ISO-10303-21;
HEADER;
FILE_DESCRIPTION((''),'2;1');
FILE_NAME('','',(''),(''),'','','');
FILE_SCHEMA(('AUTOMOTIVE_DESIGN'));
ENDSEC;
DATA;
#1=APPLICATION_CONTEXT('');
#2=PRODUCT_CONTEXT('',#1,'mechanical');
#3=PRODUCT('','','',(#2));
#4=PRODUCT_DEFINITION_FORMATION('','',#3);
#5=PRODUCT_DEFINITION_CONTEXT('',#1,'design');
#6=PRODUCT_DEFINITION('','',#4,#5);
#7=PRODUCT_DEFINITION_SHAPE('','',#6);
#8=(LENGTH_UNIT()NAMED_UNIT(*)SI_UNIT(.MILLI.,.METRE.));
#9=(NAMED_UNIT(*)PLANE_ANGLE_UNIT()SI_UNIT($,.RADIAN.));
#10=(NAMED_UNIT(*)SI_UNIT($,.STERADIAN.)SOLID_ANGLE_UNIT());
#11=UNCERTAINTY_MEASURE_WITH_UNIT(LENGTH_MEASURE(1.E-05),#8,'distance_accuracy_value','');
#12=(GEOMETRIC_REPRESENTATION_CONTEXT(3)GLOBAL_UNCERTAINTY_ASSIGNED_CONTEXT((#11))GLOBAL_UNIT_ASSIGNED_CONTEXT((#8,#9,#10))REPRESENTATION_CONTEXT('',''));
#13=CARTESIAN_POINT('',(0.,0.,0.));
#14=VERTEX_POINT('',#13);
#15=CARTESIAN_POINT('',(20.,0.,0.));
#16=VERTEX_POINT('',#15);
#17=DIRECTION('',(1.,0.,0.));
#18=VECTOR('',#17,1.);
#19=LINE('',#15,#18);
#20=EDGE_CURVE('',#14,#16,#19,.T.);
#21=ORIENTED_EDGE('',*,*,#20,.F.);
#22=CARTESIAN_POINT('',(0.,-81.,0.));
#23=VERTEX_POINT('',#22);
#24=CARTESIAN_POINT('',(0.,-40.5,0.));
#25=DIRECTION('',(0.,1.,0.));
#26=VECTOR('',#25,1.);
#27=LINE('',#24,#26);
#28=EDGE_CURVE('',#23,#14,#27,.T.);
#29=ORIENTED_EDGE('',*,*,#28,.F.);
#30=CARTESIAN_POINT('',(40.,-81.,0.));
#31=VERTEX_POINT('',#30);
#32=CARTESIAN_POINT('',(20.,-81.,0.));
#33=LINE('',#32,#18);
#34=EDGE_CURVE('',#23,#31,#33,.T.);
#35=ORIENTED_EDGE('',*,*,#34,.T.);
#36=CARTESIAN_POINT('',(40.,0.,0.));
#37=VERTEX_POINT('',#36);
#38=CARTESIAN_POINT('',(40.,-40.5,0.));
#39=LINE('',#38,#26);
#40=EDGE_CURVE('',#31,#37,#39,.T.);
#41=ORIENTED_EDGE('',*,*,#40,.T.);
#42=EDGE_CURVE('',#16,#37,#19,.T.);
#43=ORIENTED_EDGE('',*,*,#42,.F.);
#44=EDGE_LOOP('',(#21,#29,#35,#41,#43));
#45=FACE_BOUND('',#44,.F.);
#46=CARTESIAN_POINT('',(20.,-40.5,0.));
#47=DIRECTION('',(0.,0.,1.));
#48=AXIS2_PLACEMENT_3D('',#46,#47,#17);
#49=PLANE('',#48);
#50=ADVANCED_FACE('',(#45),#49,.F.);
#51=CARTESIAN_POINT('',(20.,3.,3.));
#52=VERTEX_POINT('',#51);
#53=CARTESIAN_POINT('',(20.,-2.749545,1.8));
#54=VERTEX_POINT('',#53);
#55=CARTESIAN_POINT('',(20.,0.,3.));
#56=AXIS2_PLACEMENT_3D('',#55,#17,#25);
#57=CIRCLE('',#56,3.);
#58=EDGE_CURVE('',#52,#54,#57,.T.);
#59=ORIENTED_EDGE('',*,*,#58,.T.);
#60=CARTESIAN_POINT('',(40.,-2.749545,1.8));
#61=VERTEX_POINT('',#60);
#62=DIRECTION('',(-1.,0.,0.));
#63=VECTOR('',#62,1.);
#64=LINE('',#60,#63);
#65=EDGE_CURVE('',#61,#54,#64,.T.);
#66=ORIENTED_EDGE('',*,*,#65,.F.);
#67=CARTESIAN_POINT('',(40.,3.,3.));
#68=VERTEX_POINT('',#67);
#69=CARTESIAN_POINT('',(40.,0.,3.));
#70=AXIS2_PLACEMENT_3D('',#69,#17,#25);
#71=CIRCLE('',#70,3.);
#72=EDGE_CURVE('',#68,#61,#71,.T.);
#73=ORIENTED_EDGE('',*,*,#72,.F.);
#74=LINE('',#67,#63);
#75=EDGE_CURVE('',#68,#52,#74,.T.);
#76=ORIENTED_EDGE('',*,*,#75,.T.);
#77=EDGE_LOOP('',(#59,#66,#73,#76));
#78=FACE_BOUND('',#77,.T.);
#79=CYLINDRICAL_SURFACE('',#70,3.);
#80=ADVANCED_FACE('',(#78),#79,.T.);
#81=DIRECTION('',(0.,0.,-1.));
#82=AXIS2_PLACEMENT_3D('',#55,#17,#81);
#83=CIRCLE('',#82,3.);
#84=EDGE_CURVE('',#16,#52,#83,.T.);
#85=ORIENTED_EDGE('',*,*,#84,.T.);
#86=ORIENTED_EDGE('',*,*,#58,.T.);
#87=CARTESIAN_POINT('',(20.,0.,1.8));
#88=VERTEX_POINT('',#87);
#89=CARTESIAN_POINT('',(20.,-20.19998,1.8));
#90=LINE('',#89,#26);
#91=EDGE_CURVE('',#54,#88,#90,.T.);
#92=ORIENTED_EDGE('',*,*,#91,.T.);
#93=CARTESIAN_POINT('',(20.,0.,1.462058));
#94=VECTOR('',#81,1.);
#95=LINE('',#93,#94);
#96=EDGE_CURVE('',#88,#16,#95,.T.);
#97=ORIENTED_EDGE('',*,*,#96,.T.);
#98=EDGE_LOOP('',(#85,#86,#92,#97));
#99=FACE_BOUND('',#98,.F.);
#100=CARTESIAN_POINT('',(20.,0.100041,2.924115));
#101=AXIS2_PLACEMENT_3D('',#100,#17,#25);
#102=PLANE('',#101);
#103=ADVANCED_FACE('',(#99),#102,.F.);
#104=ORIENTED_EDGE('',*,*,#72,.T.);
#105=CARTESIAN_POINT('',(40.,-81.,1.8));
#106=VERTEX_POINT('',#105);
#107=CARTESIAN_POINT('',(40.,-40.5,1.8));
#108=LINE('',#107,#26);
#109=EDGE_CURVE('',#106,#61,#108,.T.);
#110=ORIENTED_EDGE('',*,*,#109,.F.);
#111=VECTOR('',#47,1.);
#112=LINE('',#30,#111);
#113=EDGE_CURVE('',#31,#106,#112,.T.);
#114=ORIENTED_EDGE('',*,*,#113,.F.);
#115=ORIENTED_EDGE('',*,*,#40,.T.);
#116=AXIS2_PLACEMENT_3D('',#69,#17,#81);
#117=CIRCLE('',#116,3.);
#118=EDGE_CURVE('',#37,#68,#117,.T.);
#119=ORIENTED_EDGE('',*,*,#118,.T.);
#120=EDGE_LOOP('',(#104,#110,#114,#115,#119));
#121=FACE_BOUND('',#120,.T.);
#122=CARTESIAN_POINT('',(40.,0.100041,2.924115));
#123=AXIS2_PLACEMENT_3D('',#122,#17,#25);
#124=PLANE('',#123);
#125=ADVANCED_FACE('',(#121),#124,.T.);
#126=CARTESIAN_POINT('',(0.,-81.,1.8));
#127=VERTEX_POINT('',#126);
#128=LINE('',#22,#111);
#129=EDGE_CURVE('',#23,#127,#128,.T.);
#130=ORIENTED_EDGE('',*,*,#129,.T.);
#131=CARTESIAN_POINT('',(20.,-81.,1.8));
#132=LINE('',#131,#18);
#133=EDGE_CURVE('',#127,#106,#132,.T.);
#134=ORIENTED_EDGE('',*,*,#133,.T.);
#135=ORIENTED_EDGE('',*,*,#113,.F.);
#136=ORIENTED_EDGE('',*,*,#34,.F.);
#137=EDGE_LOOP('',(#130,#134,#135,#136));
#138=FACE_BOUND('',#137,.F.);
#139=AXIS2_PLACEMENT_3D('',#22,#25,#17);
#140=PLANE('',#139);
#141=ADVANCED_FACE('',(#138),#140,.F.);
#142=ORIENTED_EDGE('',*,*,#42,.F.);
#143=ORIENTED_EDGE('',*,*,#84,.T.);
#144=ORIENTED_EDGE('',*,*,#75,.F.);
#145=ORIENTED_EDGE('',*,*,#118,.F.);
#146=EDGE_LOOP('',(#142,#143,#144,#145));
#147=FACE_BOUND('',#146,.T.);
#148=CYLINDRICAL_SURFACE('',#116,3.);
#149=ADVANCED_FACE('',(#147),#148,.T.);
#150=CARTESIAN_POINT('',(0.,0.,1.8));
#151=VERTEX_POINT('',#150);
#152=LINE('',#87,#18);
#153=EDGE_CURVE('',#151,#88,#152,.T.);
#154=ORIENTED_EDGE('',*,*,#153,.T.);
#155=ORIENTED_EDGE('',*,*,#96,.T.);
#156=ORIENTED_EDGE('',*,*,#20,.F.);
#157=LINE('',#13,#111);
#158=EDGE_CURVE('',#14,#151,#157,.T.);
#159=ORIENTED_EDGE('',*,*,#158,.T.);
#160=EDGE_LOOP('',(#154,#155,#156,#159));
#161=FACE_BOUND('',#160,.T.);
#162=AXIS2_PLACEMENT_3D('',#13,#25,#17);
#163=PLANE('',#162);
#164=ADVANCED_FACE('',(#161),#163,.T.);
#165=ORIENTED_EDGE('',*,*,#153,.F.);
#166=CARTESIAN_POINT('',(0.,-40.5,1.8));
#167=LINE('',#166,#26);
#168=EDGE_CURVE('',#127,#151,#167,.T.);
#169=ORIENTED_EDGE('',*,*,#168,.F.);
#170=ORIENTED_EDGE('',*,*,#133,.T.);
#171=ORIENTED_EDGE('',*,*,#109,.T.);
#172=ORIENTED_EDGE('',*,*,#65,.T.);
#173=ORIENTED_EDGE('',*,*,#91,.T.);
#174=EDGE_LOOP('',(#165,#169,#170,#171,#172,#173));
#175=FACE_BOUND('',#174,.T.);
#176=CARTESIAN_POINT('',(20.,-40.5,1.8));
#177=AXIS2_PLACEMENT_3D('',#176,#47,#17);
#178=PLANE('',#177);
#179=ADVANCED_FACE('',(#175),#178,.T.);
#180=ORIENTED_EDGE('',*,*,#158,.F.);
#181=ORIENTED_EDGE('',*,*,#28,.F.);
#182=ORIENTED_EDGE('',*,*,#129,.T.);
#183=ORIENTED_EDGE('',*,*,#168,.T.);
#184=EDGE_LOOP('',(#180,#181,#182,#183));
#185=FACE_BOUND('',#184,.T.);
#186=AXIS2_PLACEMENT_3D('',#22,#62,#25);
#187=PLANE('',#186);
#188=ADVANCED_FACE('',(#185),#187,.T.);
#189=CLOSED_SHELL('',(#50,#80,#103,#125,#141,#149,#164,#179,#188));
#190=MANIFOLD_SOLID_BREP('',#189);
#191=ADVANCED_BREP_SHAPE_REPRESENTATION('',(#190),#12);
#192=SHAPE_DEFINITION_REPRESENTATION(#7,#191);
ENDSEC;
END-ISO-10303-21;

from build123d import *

# Parameters (mm, degrees)
F0_W     = 40
F0_H     = 81
F1_DEPTH = 1.8
F3_DEPTH = 20


with BuildPart() as f1:
    # F0 (on Top) → F1 (new body)
    with BuildSketch(Plane.XY):
        with Locations((20, -40.5)):
            Rectangle(F0_W, F0_H)
    extrude(amount=F1_DEPTH)

    # F2 (on face) → F3 (join)
    with BuildSketch(Plane.YZ.offset(40)):
        with BuildLine():
            Line((0, 1.8), (0, 0))
            ThreePointArc((0, 0), (2.1213203436, 0.8786796564), (3, 3))
            ThreePointArc((3, 3), (-0.6129289311, 5.9367189388), (-2.749545417, 1.8))
            Line((-2.749545417, 1.8), (0, 1.8))
        make_face()
        with BuildLine():
            ThreePointArc((-2.749545417, 1.8), (-1.6431676725, 0.4900199204), (0, 0))
            Line((0, 0), (0, 1.8))
            Line((0, 1.8), (-2.749545417, 1.8))
        make_face()
    extrude(amount=-F3_DEPTH)


solid = f1.part
